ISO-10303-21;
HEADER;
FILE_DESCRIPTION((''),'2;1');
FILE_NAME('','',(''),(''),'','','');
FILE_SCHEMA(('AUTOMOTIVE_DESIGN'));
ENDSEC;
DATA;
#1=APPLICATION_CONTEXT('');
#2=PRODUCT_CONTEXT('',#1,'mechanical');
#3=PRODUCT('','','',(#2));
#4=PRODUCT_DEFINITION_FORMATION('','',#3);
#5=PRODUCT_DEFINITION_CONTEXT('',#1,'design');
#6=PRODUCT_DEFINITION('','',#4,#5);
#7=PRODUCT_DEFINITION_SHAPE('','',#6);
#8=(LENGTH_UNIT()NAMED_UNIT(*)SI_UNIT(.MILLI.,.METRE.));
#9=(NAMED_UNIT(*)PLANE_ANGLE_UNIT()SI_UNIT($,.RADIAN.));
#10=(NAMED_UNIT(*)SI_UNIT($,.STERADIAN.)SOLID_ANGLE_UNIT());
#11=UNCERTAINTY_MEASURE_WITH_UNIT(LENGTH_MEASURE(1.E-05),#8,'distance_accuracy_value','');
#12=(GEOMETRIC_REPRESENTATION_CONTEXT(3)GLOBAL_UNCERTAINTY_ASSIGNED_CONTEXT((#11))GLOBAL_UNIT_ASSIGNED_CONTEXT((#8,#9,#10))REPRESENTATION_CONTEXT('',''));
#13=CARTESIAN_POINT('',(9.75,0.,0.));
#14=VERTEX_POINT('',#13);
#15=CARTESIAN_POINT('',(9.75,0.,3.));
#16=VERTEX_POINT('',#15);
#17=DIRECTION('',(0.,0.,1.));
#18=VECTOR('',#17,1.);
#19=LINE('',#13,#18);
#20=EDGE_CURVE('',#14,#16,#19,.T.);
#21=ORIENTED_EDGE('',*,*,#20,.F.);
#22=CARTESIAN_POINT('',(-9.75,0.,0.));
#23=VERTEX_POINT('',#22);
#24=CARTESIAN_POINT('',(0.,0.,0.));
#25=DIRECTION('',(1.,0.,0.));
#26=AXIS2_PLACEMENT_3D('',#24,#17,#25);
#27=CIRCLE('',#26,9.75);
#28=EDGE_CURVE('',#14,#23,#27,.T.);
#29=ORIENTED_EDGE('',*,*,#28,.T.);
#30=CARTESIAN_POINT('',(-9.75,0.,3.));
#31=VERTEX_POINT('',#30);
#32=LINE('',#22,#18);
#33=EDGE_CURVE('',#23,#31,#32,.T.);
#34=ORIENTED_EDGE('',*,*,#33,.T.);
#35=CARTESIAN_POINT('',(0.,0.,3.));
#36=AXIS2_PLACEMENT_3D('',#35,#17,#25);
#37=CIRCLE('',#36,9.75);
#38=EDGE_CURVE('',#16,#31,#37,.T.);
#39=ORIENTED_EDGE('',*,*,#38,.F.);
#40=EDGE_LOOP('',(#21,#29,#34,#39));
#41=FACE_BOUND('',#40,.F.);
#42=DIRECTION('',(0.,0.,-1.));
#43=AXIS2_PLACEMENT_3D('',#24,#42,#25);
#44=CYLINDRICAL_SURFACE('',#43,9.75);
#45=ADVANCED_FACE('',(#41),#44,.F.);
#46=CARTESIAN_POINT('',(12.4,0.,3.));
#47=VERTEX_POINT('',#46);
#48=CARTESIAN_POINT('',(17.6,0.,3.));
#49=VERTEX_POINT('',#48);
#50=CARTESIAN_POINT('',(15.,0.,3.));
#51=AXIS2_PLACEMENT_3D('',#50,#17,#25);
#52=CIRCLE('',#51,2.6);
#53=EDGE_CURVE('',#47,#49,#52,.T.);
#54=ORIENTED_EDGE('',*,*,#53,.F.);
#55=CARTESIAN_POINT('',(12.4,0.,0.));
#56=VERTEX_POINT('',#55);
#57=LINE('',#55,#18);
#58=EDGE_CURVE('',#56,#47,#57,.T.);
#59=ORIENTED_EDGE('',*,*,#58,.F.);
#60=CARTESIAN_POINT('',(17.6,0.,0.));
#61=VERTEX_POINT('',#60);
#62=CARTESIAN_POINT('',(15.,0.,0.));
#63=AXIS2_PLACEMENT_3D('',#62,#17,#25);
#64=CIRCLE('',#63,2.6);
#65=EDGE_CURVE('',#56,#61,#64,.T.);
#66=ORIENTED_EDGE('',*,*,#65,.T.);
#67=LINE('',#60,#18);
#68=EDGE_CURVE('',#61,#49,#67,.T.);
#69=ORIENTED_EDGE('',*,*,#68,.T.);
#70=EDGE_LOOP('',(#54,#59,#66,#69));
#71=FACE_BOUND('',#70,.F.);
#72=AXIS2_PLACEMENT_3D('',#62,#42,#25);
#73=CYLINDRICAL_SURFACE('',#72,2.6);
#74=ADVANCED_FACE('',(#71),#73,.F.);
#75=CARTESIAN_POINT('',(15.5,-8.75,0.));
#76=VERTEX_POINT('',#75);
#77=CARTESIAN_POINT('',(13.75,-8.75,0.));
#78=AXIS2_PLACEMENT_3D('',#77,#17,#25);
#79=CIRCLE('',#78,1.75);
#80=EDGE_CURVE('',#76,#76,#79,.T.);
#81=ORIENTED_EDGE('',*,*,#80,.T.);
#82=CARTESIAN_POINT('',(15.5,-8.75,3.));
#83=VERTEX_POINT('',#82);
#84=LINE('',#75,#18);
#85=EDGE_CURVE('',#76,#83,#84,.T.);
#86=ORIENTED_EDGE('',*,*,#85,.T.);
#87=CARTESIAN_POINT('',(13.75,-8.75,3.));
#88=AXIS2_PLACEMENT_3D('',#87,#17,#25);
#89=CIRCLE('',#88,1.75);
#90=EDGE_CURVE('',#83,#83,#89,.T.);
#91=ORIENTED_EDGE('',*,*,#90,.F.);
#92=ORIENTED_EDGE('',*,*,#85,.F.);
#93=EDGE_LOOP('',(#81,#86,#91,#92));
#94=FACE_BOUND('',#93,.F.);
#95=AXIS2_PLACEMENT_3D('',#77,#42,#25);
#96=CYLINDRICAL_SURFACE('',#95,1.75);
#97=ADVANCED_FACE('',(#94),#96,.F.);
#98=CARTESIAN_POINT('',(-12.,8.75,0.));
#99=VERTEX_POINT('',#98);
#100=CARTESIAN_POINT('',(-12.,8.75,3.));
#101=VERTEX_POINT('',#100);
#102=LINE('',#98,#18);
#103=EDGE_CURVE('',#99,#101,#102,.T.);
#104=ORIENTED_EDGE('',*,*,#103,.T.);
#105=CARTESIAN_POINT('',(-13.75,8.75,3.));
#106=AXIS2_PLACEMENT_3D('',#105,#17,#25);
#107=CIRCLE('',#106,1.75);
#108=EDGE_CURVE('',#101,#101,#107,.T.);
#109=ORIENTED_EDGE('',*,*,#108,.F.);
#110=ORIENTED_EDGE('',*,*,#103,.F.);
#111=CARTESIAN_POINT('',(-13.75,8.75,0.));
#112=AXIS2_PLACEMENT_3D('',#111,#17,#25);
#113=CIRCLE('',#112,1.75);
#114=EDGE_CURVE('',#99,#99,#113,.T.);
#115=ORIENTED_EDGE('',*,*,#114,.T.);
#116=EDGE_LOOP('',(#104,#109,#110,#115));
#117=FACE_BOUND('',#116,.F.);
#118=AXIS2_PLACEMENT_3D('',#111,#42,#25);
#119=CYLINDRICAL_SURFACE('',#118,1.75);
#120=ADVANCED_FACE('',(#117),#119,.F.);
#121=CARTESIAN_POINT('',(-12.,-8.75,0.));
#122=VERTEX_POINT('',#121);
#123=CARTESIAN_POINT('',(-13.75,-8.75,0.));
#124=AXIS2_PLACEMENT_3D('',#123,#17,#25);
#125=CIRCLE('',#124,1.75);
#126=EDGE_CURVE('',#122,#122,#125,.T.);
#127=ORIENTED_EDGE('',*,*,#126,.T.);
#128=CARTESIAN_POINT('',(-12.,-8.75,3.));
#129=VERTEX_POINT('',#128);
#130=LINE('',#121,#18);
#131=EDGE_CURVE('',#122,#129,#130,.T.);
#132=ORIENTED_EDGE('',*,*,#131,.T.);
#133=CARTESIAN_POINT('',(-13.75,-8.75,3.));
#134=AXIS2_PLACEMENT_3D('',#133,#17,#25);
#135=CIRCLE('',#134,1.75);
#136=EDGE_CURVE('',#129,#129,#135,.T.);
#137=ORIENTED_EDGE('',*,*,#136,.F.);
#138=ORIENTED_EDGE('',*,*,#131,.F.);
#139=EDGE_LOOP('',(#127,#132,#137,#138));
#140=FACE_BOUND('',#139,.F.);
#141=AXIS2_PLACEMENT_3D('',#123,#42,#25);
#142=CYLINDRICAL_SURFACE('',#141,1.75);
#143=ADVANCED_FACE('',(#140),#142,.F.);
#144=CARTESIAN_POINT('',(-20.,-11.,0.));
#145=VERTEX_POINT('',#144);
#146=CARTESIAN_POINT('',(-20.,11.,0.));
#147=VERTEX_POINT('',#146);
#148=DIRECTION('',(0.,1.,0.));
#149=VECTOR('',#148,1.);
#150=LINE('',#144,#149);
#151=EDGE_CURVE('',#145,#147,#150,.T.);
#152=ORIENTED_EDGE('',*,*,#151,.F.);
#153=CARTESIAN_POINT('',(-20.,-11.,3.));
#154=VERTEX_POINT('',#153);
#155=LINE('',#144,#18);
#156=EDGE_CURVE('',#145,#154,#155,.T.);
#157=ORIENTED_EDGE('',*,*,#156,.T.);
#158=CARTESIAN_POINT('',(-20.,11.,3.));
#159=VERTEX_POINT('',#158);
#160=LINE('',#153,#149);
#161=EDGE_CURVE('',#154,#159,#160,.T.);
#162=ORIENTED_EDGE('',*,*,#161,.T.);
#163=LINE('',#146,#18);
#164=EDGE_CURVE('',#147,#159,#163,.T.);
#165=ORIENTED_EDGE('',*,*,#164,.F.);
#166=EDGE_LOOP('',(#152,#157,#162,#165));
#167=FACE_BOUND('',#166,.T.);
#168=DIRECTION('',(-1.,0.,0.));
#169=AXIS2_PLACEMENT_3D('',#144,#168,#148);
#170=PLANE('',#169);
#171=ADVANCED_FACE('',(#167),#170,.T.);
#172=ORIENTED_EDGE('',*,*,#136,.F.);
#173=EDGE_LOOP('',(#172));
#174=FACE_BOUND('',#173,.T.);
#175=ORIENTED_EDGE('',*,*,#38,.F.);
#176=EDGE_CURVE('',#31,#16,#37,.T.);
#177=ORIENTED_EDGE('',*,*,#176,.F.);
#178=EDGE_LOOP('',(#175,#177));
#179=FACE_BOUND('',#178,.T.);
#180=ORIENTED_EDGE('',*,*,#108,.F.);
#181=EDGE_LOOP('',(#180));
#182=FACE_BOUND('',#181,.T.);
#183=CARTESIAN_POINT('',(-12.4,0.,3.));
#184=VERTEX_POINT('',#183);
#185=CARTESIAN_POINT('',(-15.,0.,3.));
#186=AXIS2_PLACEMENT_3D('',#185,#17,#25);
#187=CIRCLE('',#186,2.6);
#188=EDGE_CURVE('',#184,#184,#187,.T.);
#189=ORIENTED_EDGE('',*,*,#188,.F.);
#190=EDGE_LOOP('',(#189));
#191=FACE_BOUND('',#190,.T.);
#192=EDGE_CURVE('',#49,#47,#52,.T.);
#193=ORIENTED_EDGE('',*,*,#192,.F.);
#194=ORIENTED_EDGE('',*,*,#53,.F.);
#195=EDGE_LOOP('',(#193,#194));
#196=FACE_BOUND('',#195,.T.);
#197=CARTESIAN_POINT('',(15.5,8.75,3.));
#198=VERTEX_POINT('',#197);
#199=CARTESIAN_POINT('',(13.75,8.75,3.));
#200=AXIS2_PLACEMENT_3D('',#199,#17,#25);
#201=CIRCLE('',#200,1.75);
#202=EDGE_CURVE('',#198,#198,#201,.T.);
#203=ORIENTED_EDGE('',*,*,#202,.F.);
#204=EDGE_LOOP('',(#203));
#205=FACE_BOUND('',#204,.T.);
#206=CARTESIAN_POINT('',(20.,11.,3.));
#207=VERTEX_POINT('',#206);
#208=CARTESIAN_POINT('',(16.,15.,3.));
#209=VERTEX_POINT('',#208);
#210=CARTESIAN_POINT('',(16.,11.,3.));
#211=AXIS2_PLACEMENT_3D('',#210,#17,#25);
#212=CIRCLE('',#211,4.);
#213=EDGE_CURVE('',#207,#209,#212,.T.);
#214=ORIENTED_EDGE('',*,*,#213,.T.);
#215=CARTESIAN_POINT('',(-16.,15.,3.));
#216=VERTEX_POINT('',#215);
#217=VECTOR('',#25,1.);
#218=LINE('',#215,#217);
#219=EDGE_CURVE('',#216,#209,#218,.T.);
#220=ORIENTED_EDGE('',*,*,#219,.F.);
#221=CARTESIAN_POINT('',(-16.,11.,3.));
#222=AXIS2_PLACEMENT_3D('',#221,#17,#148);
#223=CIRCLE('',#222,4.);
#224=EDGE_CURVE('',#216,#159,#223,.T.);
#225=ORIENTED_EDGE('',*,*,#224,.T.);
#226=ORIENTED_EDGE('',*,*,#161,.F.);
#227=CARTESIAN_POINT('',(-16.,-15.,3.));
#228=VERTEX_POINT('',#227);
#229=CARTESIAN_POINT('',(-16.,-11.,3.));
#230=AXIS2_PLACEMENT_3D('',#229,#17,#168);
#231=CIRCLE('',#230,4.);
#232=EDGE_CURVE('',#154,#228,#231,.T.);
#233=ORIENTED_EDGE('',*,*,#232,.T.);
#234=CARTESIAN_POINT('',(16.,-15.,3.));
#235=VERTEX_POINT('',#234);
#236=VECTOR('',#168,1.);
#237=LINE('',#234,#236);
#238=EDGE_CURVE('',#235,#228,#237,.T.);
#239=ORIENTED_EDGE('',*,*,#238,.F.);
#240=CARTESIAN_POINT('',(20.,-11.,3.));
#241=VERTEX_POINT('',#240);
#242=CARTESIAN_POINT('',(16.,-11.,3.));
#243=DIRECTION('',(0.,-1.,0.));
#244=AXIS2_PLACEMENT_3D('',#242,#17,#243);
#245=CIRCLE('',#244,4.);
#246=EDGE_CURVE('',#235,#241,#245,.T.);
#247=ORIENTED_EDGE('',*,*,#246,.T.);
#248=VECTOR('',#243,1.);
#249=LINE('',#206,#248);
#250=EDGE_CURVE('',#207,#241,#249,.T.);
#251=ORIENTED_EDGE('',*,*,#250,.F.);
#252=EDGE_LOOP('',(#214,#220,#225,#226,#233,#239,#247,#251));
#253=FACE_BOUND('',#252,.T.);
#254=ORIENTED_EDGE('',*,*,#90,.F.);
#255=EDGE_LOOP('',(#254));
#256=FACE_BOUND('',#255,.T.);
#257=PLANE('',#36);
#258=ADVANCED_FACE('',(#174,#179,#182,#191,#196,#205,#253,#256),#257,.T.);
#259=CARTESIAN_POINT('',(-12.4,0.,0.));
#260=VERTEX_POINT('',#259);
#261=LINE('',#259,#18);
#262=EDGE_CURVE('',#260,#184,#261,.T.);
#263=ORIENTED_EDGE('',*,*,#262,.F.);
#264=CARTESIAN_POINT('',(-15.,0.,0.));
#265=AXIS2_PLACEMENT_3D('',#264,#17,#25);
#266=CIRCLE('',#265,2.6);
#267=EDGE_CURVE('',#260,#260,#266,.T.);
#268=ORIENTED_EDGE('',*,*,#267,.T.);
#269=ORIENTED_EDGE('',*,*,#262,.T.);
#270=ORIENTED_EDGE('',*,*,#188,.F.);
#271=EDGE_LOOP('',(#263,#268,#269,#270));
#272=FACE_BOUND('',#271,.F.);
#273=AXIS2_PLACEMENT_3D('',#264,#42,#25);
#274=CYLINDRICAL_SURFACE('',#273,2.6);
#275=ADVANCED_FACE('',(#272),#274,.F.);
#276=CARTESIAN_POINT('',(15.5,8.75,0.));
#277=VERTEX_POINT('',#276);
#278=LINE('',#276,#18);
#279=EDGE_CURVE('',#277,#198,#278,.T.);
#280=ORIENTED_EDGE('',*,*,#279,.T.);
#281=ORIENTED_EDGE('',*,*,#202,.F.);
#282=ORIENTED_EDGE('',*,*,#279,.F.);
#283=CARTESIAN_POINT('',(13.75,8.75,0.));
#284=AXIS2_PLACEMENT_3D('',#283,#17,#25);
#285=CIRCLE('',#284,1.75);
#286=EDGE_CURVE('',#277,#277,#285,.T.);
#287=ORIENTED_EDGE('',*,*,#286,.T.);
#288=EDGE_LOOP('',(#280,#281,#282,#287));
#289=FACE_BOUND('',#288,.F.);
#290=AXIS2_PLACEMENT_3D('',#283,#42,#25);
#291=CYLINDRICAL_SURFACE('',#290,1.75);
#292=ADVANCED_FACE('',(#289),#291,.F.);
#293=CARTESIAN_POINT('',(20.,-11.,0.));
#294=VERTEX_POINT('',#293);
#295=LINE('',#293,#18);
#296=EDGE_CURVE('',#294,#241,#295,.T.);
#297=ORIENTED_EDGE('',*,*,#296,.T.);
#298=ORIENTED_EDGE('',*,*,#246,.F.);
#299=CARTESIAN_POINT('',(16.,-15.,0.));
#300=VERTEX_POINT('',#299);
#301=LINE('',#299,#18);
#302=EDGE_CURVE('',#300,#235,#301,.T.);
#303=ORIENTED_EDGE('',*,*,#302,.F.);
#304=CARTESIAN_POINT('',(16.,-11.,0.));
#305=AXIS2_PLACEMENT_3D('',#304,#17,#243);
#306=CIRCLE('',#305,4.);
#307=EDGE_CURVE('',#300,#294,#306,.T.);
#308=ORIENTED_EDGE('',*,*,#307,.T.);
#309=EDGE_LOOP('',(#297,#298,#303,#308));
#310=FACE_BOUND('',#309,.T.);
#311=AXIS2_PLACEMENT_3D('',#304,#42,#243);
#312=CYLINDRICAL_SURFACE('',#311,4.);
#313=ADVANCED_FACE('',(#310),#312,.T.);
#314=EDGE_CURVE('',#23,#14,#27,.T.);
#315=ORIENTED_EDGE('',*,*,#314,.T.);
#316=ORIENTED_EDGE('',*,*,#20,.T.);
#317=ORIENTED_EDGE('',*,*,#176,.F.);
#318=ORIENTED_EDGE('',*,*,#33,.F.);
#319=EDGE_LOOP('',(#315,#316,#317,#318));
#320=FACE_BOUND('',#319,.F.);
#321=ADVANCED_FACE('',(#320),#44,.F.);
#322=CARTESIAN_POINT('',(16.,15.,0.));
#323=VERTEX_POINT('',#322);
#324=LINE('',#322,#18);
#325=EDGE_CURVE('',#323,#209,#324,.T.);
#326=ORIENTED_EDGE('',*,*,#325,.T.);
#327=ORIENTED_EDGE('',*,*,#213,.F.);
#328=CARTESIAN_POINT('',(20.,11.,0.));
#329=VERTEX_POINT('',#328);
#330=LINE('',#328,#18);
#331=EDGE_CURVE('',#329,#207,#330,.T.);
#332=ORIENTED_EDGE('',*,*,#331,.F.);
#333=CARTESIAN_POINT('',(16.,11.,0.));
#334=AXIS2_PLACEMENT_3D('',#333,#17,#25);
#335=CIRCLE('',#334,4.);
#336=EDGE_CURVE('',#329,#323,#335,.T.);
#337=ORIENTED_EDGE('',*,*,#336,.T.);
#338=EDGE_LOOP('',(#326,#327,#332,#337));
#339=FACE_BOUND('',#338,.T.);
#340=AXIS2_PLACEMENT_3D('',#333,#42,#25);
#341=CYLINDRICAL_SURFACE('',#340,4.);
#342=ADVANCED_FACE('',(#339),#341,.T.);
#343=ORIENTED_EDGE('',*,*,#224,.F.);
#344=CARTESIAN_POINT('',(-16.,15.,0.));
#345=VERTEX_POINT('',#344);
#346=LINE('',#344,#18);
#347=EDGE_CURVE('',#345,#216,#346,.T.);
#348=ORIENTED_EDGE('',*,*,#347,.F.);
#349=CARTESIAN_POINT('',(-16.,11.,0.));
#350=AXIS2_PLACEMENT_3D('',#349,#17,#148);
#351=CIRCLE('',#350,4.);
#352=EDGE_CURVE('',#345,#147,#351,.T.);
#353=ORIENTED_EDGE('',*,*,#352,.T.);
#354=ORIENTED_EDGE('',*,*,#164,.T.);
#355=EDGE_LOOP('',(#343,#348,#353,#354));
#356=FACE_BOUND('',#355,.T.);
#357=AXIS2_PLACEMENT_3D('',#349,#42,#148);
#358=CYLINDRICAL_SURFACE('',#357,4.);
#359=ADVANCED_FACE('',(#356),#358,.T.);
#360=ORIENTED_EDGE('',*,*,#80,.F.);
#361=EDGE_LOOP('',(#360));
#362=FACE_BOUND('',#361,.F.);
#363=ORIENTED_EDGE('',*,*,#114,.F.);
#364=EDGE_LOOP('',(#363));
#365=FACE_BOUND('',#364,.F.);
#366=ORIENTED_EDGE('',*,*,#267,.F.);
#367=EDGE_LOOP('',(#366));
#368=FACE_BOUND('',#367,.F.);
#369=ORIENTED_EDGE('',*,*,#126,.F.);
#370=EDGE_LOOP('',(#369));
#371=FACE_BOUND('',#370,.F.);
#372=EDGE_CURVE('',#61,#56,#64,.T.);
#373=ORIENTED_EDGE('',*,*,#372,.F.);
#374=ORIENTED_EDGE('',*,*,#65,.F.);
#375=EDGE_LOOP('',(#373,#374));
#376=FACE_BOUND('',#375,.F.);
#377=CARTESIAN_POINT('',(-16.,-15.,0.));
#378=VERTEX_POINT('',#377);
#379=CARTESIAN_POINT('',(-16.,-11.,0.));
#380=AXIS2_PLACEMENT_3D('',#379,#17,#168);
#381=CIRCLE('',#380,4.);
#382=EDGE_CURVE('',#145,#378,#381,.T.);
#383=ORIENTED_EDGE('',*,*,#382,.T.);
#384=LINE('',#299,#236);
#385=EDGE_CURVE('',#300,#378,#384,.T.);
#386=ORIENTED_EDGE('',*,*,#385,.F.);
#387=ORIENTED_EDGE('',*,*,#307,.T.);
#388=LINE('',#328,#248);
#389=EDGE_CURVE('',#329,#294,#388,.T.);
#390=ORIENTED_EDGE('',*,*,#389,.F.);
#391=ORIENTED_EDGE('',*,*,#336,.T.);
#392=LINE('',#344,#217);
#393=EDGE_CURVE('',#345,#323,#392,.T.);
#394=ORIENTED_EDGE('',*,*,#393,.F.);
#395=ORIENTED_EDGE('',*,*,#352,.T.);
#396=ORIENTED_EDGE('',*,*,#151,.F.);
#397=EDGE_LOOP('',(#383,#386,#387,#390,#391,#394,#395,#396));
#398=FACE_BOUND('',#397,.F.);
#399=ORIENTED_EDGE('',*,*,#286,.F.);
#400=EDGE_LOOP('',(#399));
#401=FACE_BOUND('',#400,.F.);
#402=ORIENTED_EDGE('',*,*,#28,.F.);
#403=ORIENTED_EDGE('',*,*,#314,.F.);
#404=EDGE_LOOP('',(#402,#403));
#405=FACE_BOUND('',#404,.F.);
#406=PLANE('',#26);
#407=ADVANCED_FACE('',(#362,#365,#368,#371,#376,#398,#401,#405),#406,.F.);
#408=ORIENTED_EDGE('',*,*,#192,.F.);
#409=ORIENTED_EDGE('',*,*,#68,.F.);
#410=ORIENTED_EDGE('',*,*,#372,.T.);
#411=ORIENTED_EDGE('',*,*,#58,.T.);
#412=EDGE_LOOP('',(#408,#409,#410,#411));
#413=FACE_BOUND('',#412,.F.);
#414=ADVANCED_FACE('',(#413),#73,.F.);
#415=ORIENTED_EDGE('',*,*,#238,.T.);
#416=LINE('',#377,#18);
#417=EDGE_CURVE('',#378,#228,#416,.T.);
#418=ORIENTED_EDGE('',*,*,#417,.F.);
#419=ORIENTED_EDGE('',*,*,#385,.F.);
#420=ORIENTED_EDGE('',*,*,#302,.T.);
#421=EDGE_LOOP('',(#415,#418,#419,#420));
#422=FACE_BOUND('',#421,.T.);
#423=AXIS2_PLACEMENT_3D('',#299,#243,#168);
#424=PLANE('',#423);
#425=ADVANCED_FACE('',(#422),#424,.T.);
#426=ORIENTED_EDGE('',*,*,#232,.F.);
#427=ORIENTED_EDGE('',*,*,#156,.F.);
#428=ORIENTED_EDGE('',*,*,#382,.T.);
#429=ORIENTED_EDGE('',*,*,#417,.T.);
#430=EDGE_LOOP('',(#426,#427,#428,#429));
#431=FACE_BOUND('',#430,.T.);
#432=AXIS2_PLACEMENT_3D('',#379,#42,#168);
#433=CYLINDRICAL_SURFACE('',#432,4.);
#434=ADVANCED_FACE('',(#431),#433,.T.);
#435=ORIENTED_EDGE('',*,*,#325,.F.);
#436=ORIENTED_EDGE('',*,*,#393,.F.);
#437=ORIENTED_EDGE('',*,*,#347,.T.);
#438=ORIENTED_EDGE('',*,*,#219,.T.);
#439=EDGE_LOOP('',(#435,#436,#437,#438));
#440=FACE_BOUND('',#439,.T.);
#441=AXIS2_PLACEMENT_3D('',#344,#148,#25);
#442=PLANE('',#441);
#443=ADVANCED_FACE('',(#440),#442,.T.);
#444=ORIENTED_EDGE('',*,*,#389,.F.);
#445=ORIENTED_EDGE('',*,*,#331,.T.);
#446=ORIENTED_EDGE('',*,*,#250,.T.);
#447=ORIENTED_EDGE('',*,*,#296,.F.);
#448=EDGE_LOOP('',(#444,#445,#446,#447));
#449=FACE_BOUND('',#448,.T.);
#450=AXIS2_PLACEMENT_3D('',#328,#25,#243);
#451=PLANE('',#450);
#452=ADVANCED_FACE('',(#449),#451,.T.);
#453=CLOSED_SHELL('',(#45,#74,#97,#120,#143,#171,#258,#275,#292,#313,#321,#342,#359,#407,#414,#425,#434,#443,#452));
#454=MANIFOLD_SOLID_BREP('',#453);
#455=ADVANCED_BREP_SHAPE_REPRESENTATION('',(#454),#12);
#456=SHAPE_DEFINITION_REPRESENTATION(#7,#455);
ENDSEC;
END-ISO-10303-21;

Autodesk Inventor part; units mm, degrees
ref_plane "YZ Plane" through (0, 0, 0) normal (1, 0, 0) x (0, 1, 0)
ref_plane "XZ Plane" through (0, 0, 0) normal (0, 1, 0) x (-1, 0, 0)
ref_plane "XY Plane" through (0, 0, 0) normal (0, 0, 1) x (1, 0, 0)
sketch "Sketch1" plane through (0, 0, 0) normal (0, 0, 1) x (1, 0, 0)
  arc A0 (13.75, 13) -> (18, 8.75) centre (13.75, 8.75) ccw construction
  line L0 (18, -8.75) -> (18, 8.75) construction
  arc A1 (18, -8.75) -> (13.75, -13) centre (13.75, -8.75) ccw construction
  line L1 (-13.75, -13) -> (13.75, -13) construction
  arc A2 (-13.75, -13) -> (-18, -8.75) centre (-13.75, -8.75) ccw construction
  line L2 (-18, 8.75) -> (-18, -8.75) construction
  arc A3 (-18, 8.75) -> (-13.75, 13) centre (-13.75, 8.75) ccw construction
  line L3 (13.75, 13) -> (-13.75, 13) construction
  circle A4 centre (-13.75, 8.75) radius 2.25 construction
  circle A5 centre (13.75, -8.75) radius 2.25 construction
  circle A6 centre (13.75, 8.75) radius 2.25 construction
  circle A7 centre (-13.75, -8.75) radius 2.25 construction
  arc A8 (-20, -11) -> (-16, -15) centre (-16, -11) ccw projected
  line L4 (16, -15) -> (-16, -15) projected
  arc A9 (16, -15) -> (20, -11) centre (16, -11) ccw projected
  line L5 (20, 11) -> (20, -11) projected
  arc A10 (20, 11) -> (16, 15) centre (16, 11) ccw projected
  line L6 (-16, 15) -> (16, 15) projected
  arc A11 (-16, 15) -> (-20, 11) centre (-16, 11) ccw projected
  line L7 (-20, -11) -> (-20, 11) projected
  circle A12 centre (-13.75, 8.75) radius 1.75
  circle A13 centre (13.75, 8.75) radius 1.75
  circle A14 centre (13.75, -8.75) radius 1.75
  circle A15 centre (-13.75, -8.75) radius 1.75
  circle A16 centre (0, 0) radius 9.75
  circle A17 centre (-15, 0) radius 2.6
  circle A18 centre (15, 0) radius 2.6
  line L8 (-15, 0) -> (15, 0)
  dimension "d0" = 3.5
  dimension "d1" = 19.5
  dimension "d2" = 5.2
  dimension "d3" = 30
extrude "Extrusion1" add sketch "Sketch1" along normal blind 3
properties part number "button_holder_face"
